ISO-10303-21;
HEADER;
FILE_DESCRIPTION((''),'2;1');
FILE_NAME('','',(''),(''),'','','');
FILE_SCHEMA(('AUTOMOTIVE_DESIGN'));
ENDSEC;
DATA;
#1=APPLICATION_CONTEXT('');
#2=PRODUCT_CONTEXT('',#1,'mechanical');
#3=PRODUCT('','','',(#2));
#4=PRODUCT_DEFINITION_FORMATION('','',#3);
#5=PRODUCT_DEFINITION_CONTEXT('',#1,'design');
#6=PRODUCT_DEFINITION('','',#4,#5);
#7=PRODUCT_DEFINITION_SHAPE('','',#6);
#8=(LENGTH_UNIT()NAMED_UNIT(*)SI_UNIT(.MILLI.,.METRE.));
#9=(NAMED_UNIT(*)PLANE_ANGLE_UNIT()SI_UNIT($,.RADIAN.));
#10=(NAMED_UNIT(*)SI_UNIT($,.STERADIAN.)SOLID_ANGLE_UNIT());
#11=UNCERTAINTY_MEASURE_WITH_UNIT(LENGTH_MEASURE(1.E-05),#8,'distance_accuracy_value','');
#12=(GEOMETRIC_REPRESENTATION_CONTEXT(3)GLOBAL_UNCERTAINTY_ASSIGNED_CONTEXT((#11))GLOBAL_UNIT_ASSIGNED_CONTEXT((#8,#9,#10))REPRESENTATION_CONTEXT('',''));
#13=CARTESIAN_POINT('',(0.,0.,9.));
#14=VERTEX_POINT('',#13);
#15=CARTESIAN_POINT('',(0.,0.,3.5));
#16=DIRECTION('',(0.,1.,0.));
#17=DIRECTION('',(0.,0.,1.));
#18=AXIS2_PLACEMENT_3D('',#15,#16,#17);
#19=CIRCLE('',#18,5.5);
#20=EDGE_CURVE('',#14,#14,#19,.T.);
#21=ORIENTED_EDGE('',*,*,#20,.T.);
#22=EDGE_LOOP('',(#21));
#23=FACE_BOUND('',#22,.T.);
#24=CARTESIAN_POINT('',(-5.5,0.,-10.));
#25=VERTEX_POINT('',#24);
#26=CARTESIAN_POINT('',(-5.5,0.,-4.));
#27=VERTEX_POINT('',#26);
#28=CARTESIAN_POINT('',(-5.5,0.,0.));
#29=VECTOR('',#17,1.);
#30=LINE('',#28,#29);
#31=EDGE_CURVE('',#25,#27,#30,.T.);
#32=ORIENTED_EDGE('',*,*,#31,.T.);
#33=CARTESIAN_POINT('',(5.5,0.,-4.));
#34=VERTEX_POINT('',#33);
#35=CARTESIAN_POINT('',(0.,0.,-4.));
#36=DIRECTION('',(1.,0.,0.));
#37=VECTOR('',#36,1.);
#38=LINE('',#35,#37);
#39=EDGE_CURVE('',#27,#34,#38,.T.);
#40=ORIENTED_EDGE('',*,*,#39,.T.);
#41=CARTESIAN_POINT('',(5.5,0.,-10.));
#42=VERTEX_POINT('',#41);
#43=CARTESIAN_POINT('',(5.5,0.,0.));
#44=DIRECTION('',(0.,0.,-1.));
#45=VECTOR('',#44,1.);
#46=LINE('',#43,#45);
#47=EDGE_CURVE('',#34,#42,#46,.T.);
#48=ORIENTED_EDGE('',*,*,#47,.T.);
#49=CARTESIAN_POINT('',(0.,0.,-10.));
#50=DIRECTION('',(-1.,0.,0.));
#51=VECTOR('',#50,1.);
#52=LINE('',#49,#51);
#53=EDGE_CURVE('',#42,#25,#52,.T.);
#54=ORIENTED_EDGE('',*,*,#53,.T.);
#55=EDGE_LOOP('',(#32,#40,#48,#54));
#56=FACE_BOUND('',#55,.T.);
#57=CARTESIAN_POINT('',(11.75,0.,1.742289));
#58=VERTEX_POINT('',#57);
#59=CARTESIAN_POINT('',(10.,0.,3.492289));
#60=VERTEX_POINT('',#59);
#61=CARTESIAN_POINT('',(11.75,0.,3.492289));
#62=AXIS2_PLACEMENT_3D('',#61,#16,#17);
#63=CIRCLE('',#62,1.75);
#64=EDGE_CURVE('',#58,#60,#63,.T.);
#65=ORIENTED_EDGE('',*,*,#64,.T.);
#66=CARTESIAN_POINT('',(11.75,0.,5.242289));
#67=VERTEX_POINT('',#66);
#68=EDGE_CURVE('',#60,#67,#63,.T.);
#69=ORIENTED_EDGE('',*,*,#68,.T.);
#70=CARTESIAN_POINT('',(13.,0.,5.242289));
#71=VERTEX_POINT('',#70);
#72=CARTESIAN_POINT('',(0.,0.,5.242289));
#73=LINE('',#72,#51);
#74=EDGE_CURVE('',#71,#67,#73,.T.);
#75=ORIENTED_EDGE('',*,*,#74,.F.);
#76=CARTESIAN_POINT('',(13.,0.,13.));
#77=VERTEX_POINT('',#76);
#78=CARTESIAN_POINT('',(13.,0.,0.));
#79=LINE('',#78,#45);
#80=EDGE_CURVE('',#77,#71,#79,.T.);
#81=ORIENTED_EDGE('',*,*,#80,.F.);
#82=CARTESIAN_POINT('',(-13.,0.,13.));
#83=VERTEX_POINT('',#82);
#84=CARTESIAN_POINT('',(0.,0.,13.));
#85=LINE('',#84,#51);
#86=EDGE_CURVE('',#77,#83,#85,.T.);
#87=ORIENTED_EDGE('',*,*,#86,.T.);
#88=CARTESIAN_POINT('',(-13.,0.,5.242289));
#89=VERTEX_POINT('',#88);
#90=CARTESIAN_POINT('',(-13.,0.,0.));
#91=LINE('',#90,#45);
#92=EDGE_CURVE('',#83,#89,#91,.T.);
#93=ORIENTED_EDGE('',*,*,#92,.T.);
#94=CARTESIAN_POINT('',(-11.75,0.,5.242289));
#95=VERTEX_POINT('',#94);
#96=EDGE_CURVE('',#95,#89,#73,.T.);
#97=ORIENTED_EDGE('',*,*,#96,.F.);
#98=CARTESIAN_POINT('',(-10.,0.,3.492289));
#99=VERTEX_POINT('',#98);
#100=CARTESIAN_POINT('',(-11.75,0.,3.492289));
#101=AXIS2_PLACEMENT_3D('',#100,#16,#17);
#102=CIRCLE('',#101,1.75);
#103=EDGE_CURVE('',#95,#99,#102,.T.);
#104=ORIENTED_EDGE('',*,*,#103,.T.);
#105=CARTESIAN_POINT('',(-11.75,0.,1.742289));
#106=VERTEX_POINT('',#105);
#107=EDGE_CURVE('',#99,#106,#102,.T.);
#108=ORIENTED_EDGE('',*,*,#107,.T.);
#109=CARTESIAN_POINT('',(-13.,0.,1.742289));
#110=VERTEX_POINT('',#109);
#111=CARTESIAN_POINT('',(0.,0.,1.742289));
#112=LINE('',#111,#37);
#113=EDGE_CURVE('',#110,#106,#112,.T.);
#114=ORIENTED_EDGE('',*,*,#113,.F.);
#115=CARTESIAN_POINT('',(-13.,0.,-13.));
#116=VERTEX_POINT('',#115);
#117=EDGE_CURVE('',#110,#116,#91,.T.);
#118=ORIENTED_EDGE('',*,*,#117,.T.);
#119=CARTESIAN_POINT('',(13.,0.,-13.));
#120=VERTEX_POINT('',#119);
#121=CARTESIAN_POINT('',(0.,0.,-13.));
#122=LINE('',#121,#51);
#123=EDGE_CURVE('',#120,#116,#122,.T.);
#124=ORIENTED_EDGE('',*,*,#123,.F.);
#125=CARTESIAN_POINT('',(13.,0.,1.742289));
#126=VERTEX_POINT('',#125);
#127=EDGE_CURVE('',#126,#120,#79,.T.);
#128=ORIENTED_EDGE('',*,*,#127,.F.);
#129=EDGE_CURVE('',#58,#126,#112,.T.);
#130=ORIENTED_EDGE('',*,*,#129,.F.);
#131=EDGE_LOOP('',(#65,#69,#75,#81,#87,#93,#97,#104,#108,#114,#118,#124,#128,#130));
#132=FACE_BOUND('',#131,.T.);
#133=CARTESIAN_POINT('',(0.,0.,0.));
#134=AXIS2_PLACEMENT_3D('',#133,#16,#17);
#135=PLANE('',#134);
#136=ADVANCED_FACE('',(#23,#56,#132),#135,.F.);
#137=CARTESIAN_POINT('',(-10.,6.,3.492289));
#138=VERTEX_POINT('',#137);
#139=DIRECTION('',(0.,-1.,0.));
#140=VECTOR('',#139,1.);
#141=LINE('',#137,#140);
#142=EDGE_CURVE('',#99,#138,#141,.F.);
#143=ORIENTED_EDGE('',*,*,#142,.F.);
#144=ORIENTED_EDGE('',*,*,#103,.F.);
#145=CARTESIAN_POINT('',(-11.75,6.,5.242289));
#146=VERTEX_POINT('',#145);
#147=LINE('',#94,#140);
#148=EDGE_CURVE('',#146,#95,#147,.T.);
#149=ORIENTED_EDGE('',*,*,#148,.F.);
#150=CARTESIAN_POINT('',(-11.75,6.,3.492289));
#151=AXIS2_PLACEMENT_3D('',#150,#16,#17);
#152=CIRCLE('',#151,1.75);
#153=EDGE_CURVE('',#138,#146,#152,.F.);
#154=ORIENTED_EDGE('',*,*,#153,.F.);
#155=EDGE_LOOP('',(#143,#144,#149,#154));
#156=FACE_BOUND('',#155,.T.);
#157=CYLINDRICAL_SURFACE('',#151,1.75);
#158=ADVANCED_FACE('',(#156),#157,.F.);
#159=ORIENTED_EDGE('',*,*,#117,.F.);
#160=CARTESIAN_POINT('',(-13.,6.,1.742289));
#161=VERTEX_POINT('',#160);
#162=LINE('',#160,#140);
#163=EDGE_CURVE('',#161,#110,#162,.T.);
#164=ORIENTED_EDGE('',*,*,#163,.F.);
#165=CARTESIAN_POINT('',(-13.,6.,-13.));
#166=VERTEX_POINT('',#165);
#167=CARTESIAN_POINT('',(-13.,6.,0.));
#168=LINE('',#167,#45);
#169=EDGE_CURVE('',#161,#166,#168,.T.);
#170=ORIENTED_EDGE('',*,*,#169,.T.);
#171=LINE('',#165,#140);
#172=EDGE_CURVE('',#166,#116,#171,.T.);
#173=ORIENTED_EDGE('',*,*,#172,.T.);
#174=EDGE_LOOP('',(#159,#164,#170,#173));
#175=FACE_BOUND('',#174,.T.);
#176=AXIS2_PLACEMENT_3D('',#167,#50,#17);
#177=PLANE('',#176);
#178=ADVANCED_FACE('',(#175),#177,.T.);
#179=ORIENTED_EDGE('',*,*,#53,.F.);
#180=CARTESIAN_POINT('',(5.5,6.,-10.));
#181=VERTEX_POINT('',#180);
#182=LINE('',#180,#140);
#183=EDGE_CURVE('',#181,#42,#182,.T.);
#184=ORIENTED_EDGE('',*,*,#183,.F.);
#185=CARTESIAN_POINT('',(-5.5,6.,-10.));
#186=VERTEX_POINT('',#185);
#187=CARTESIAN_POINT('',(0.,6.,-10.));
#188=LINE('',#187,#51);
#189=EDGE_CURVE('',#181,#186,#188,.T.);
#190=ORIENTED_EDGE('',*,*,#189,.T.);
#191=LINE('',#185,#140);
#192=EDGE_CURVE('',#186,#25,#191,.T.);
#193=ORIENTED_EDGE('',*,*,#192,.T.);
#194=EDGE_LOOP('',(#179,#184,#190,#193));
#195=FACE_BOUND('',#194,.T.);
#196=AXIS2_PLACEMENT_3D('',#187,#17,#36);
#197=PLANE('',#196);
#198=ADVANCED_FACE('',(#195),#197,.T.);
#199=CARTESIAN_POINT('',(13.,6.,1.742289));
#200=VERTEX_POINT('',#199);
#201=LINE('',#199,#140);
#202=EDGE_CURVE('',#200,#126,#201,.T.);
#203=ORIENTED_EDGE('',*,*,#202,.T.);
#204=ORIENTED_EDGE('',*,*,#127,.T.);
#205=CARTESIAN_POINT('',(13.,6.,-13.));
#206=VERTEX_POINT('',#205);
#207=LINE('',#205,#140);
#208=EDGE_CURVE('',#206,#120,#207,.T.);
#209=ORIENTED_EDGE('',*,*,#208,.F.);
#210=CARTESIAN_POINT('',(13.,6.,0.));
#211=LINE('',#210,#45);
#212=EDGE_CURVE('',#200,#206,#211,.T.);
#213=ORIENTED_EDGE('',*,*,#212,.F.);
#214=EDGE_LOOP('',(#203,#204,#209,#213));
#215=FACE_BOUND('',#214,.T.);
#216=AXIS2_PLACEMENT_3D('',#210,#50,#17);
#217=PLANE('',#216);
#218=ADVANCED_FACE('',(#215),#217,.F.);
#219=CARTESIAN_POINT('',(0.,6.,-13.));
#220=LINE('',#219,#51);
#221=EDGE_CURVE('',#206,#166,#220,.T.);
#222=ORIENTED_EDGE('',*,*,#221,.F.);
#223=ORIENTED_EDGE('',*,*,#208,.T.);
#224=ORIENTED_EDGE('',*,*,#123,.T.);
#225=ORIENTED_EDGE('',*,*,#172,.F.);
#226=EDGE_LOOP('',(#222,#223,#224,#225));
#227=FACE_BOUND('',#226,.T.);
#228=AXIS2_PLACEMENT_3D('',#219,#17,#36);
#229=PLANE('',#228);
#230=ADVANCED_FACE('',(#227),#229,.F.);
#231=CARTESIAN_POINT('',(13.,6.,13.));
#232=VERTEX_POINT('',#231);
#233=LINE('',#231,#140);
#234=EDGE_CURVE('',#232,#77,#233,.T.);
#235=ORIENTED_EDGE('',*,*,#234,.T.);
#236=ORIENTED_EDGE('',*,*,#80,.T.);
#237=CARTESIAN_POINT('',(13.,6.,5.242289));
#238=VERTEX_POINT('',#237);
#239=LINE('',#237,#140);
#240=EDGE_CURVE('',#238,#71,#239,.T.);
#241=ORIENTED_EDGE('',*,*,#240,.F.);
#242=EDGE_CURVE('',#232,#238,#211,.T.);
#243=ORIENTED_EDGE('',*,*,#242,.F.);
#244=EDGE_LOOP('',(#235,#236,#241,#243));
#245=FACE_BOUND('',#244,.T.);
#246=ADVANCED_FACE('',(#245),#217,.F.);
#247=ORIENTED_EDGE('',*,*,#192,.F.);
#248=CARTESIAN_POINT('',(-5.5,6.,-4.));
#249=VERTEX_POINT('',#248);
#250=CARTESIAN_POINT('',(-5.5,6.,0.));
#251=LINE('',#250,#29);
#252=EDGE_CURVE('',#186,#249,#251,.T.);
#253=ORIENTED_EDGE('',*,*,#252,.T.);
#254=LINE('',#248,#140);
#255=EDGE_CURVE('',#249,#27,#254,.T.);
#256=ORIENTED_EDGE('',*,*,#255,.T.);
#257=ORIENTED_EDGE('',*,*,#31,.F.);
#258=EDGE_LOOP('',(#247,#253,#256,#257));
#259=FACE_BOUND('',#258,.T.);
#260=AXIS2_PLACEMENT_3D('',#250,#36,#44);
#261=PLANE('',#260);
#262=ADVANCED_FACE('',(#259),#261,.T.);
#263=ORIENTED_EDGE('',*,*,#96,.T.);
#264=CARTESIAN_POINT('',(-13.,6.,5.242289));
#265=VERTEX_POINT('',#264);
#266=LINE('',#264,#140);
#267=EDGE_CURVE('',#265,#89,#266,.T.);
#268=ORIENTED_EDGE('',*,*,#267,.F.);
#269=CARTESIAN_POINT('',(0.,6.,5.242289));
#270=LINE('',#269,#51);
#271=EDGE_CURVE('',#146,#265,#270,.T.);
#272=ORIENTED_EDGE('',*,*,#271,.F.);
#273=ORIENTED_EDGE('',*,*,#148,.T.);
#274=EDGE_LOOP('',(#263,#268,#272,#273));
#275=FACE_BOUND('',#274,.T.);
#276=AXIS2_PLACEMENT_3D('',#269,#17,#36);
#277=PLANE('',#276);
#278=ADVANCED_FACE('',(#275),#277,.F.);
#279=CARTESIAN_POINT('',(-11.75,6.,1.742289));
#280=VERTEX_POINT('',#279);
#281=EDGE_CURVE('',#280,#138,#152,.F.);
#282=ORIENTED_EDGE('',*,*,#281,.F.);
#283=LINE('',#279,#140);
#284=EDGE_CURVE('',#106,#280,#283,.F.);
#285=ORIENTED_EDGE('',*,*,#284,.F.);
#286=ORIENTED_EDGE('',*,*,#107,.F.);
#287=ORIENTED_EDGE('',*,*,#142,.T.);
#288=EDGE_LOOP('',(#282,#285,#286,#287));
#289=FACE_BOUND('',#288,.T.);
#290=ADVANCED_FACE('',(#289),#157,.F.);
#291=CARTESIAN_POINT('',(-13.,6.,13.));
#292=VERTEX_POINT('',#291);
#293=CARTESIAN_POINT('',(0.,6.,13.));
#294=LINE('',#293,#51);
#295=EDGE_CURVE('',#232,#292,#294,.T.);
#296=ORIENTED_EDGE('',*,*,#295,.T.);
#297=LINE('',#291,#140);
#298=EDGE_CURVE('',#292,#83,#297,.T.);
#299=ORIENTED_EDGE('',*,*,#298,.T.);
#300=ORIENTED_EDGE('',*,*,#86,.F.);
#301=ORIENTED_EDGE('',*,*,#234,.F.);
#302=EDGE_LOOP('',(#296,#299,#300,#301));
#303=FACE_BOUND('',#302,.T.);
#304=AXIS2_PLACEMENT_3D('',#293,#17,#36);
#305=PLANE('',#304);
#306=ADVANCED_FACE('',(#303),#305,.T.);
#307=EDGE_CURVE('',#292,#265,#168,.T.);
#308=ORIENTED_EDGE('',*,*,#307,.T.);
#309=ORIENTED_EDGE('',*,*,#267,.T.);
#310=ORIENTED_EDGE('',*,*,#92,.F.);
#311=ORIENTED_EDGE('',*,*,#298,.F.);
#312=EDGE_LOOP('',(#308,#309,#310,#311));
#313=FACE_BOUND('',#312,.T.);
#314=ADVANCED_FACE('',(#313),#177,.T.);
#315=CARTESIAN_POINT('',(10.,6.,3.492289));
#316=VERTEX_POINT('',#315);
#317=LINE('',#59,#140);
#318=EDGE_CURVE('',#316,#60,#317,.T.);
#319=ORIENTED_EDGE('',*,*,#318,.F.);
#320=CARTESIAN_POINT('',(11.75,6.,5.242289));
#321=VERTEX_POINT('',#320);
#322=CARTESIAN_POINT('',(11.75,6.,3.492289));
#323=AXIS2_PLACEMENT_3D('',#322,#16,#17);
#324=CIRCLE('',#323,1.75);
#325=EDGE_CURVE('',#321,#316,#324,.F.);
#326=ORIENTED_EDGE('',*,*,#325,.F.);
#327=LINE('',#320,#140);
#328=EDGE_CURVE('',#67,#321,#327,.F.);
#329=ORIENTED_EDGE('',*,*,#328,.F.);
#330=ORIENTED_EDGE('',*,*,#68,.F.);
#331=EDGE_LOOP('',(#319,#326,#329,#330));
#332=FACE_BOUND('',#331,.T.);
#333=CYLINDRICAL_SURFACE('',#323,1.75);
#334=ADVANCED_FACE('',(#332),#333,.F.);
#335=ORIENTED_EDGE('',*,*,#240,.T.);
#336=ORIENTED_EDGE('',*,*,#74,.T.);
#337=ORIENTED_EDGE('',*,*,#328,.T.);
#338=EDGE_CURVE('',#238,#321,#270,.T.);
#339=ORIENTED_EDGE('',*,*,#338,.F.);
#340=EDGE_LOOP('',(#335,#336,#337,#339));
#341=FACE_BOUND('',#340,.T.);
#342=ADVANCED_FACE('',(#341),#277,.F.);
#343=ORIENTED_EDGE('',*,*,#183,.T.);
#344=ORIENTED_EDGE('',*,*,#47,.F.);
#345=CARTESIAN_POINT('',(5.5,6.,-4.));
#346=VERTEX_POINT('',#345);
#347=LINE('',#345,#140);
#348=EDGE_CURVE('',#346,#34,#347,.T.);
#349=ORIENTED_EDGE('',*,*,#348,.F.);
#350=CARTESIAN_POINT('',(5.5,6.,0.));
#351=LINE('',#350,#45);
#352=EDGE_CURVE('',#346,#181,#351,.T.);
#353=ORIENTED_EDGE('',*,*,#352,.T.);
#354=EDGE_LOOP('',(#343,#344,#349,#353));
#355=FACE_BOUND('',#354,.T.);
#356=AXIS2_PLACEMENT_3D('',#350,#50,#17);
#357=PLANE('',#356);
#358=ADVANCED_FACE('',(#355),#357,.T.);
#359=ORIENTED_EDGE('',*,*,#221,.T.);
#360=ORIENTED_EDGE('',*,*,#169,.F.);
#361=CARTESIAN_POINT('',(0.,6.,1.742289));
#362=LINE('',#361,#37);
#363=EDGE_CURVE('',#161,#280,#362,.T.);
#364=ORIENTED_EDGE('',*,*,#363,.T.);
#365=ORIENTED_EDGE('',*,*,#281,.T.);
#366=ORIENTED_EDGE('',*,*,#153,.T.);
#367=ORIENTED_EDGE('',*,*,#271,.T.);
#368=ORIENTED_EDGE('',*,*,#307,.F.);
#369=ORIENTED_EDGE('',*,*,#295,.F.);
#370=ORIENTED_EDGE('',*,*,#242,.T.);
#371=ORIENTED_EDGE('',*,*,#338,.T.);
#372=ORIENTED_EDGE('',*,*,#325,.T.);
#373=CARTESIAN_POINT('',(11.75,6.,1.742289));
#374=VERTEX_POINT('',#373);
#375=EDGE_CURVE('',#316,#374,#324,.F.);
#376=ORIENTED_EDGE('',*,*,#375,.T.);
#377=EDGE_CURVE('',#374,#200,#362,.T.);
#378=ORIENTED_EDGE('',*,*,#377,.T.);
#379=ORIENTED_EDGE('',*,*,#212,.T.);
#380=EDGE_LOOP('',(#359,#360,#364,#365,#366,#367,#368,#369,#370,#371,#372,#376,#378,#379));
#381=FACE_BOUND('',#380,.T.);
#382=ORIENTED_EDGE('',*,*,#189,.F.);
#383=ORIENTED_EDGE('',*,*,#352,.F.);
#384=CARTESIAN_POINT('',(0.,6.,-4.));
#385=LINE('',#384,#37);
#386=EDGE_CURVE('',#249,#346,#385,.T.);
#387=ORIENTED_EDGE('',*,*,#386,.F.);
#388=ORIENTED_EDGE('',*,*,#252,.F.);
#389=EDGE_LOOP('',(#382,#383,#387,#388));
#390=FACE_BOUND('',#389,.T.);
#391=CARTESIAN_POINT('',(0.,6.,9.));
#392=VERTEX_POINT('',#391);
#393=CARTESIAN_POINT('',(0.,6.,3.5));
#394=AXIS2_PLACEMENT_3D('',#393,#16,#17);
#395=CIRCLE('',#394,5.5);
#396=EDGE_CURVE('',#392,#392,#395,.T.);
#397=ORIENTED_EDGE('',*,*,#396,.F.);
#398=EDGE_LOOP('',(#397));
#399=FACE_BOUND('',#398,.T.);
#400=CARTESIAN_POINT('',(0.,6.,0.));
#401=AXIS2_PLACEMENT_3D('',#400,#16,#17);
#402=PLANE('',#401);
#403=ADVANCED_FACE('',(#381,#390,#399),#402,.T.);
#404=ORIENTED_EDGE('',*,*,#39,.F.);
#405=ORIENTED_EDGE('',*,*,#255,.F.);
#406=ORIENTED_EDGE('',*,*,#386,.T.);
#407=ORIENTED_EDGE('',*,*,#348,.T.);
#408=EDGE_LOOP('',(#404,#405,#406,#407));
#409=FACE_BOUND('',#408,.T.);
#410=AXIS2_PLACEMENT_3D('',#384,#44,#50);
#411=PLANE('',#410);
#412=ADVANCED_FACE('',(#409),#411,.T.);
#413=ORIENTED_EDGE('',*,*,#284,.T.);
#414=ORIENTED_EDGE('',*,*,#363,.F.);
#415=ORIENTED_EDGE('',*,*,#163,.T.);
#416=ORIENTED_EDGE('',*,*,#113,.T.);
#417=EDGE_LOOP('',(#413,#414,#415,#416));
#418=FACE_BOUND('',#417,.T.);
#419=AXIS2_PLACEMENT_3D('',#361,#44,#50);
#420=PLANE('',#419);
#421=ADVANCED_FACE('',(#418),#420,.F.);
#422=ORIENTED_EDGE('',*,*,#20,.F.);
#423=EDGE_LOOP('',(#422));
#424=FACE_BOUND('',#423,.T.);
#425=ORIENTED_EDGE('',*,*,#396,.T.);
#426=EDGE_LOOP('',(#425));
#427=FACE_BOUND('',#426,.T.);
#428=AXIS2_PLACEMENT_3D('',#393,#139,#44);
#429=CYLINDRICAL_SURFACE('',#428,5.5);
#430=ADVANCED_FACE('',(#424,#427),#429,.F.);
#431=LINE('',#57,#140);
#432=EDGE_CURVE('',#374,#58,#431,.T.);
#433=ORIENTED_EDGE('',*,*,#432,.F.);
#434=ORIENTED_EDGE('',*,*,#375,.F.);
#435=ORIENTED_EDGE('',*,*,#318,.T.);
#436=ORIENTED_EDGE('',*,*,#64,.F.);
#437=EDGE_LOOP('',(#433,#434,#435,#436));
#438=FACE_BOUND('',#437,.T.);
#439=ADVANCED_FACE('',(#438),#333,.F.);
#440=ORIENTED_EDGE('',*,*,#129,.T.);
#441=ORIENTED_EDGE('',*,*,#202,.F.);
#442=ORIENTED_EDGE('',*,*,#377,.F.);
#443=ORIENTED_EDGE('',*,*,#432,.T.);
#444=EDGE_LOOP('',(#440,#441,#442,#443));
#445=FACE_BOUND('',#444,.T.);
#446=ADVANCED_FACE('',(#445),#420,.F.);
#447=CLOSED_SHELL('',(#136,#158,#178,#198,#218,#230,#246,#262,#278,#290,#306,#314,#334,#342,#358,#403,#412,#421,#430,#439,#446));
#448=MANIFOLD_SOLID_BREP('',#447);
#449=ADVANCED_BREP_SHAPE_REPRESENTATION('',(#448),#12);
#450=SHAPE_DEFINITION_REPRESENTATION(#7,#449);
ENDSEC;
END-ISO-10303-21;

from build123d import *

# Parameters (mm, degrees)
ESBO_O1_R                = 5.5
RESSALTO_EXTRUS_O1_DEPTH = 6
FILETE1_R                = 1.75


with BuildPart() as part:
    # Esboço1 → Ressalto-extrusão1 (new body)
    with BuildSketch(Plane(origin=(0, 0, 0), x_dir=(1, 0, 0), z_dir=(0, 1, 0))):
        Polygon((-13, -13), (13, -13), (13, -5.242288745), (10, -5.242288745), (10, -1.742288745), (13, -1.742288745), (13, 13), (-13, 13), (-13, -1.742288745), (-10, -1.742288745), (-10, -5.242288745), (-13, -5.242288745), align=None)
        with Locations(Location((0, -3.5, 0), (0, 0, 270))):
            Circle(ESBO_O1_R, mode=Mode.SUBTRACT)
        Polygon((-5.5, 10), (0, 10), (5.5, 10), (5.5, 4), (-5.5, 4), align=None, mode=Mode.SUBTRACT)
    extrude(amount=RESSALTO_EXTRUS_O1_DEPTH)

    # Filete1
    filete1_edges = [part.edges().sort_by_distance(p)[0] for p in [
        (10, 3, 1.742288745),
        (10, 3, 5.242288745),
        (-10, 3, 1.742288745),
        (-10, 3, 5.242288745),
    ]]
    fillet(filete1_edges, radius=FILETE1_R - 0.0001)  # a hair under: the kernel refuses the full size


solid = part.part
